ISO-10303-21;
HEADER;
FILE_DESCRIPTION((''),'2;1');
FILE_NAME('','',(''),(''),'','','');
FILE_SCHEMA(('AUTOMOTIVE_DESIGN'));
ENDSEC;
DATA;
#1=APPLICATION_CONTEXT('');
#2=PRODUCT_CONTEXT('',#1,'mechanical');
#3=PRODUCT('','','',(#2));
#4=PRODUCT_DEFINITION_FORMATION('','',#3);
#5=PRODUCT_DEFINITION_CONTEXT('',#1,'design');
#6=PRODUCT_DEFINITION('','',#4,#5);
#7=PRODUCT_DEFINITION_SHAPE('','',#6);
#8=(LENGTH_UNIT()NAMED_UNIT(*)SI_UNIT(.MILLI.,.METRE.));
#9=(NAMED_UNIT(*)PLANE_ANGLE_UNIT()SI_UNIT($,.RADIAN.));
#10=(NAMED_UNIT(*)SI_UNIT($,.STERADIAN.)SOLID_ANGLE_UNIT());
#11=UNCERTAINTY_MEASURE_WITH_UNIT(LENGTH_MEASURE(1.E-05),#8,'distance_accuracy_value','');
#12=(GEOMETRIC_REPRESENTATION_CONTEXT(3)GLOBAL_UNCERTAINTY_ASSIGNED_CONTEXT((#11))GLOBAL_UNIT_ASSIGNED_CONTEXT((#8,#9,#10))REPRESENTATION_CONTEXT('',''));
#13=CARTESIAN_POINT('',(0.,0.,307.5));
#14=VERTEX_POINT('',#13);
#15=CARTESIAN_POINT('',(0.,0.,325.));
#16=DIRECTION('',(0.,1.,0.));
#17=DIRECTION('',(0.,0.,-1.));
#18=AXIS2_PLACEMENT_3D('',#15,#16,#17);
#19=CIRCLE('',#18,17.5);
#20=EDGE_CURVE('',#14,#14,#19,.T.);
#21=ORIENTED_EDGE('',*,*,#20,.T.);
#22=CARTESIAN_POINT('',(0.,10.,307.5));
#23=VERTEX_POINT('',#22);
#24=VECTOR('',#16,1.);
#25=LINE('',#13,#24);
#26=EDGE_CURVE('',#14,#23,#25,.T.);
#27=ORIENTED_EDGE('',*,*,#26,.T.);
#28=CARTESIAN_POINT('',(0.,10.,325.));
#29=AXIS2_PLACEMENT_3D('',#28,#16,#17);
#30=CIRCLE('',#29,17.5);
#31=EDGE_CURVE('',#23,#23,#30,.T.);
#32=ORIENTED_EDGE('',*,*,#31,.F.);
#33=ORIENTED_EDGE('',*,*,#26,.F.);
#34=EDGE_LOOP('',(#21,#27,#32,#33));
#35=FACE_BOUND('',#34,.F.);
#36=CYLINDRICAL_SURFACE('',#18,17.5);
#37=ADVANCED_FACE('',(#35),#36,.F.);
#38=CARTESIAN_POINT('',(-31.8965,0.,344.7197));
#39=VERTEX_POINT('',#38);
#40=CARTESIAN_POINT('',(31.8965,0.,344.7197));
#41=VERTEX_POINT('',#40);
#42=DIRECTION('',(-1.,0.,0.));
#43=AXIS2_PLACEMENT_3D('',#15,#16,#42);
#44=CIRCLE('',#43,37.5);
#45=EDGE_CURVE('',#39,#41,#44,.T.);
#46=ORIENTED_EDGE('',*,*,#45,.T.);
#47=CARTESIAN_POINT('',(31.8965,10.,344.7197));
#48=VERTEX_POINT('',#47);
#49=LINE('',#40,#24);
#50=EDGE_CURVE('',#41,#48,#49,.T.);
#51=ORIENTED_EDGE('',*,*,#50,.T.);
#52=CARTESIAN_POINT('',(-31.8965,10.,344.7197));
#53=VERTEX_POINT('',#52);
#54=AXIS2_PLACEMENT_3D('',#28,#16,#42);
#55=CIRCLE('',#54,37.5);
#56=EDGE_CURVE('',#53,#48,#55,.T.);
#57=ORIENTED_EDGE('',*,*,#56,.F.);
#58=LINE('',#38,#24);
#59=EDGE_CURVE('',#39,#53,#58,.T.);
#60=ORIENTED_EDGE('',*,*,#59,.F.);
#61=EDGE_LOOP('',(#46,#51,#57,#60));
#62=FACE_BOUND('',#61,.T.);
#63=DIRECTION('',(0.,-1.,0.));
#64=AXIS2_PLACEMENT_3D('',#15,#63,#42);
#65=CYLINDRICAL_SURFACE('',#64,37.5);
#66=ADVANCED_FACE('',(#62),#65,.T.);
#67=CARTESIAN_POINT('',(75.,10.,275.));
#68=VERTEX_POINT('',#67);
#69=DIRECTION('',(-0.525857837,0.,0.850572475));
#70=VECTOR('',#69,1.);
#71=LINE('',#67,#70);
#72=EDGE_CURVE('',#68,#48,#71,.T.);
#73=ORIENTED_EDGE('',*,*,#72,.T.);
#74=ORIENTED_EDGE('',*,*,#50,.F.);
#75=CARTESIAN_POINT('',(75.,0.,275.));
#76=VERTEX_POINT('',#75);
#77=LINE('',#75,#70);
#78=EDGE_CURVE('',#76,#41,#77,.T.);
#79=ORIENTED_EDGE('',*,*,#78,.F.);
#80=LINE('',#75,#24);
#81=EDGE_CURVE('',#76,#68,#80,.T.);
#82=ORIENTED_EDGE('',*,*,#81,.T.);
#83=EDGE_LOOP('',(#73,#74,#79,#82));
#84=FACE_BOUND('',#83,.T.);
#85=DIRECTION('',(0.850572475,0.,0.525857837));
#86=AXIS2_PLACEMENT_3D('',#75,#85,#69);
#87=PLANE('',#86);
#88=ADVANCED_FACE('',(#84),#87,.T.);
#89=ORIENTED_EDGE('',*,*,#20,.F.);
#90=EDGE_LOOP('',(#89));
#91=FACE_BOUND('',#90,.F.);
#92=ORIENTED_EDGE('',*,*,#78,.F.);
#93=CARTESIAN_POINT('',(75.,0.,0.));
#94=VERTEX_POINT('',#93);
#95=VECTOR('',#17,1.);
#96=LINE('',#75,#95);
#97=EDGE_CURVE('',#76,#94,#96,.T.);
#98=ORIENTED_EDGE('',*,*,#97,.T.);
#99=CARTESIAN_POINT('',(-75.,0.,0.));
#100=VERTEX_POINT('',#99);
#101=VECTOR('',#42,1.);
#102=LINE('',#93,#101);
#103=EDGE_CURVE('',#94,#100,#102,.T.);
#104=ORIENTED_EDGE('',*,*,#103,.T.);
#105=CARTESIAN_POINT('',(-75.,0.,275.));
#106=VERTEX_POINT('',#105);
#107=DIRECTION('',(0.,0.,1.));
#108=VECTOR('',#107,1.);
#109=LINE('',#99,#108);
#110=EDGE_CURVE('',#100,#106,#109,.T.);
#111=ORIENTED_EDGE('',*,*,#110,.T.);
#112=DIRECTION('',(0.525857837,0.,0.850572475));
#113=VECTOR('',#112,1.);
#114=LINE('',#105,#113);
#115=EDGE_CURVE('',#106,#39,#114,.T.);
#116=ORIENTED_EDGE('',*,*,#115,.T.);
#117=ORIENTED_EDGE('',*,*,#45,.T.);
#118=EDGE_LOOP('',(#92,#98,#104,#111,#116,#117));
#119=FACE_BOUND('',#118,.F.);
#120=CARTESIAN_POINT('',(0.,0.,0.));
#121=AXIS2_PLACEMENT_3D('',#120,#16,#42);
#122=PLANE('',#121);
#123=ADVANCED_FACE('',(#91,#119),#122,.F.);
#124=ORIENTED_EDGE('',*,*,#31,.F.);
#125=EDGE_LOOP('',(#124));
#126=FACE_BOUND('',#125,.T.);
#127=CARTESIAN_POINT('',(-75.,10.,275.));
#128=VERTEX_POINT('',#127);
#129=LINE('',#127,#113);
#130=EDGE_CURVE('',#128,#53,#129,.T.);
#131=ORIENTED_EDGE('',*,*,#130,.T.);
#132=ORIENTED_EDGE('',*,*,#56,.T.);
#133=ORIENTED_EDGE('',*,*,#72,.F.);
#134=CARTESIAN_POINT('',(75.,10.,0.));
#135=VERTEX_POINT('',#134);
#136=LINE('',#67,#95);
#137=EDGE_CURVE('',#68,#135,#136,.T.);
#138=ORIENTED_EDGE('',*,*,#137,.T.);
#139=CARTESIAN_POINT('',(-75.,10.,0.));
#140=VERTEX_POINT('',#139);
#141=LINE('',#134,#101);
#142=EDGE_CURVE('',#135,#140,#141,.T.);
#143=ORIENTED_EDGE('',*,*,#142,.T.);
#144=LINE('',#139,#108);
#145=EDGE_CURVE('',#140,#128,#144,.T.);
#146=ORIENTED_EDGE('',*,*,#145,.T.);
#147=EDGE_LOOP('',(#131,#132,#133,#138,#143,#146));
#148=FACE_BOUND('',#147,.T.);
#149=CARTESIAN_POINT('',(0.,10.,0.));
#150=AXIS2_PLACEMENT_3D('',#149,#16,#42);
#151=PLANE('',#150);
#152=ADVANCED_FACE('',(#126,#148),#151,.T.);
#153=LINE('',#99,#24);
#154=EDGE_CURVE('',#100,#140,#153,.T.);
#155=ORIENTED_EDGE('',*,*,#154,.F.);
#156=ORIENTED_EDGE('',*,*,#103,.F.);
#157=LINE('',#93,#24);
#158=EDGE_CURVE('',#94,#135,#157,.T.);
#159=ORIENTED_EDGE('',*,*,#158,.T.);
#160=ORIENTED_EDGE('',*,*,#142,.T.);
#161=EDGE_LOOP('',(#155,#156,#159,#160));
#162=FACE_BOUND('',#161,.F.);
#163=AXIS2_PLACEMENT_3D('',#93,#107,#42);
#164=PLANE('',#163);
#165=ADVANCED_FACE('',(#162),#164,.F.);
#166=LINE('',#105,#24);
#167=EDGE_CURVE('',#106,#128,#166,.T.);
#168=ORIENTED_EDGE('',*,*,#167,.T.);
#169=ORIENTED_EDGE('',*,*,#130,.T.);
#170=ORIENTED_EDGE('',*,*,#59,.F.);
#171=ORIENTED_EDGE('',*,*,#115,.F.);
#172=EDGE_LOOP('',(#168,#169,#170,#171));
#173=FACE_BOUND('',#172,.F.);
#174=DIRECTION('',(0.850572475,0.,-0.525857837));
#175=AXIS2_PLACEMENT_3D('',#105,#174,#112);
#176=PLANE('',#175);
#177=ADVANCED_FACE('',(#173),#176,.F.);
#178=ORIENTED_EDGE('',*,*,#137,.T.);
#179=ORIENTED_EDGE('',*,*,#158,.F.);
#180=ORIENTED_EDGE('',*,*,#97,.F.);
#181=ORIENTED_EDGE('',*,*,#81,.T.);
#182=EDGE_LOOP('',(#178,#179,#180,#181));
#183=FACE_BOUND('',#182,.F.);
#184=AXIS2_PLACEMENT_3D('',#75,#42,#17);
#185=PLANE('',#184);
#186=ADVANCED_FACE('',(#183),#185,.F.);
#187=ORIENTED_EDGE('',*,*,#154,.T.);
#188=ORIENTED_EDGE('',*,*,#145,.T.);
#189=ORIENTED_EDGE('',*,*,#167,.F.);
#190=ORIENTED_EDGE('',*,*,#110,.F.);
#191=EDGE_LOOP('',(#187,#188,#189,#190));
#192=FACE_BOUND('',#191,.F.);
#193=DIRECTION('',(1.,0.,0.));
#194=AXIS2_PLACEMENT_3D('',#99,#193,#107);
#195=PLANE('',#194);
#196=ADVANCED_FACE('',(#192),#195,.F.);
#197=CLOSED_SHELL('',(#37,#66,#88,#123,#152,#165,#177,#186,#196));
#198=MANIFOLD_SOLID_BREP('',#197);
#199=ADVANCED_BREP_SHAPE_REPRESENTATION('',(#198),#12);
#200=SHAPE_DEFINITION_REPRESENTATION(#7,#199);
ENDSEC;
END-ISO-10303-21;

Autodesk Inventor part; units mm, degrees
ref_plane "Work Plane2" through (-75, 10, 210) normal (0, 0, 1) x (1, 0, 0)
ref_plane "YZ Plane" through (0, 0, 0) normal (1, 0, 0) x (0, 1, 0)
ref_plane "XZ Plane" through (0, 0, 0) normal (0, 1, 0) x (-1, 0, 0)
sketch "Sketch1" plane through (0, 0, 0) normal (0, 1, 0) x (-1, 0, 0)
  line L0 (-75, 0) -> (75, 0)
  line L1 (75, 0) -> (75, 275)
  line L2 (75, 275) -> (-75, 275) construction
  line L3 (-75, 275) -> (-75, 0)
  circle A0 centre (0, 325) radius 37.5
  line L4 (-75, 275) -> (-31.8965, 344.7197)
  line L5 (75, 275) -> (31.8965, 344.7197)
  point P0 (0, 0)
  point P1 (0, 0)
  dimension "d2" = 75
  dimension "d3" = 50
extrude "Extrusion1" add sketch "Sketch1" along normal blind 10
sketch "Sketch2" plane through (0, 0, 0) normal (0, -1, 0) x (1, 0, 0)
  arc A0 (31.8965, 344.7197) -> (-31.8965, 344.7197) centre (0, 325) ccw projected
  point P0 (0, 0)
hole "Hole1" at (0, 0, 325) direction (0, 1, 0) diameter 35 end through all
sketch "Sketch3" plane through (-75, 0, 0) normal (-1, 0, 0) x (0, 0, 1)
  line L0 (11, 10) -> (11, 54)
  line L1 (11, 54) -> (41, 84)
  line L2 (41, 84) -> (159, 84)
  line L3 (159, 84) -> (189, 54)
  line L4 (189, 54) -> (189, 10)
  line L5 (0, 10) -> (275, 10) projected
  line L6 (189, 10) -> (11, 10)
  dimension "d14" = 135
  dimension "d18" = 11
  dimension "d19" = 74
  dimension "d20" = 30
  dimension "d22" = 178
  dimension "d26" = 21
sketch "Sketch6" plane through (-75, 10, 210) normal (0, 0, 1) x (1, 0, 0)
  line L0 (0, 0) -> (10, 0)
  line L1 (10, 0) -> (10, 25)
  line L2 (10, 25) -> (0, 25)
  line L3 (0, 25) -> (0, 0)
  point P0 (75, -10)
  dimension "d27" = 10
  dimension "d28" = 25
sketch3d "3D Sketch1"
sketch "Sketch7" plane through (0, 10, 0) normal (0, 1, 0) x (1, 0, 0)
  circle A0 centre (0, -325) radius 17.5 projected
  circle A1 centre (0, -325) radius 27.5
  point P0 (0, 0)
  dimension "d31" = 10
sketch "Sketch8" plane through (-75, 35, 210) normal (0, 1, 0) x (1, 0, 0)
  line L0 (0, -65) -> (43.1035, -134.7197) projected
  arc A0 (43.1035, -134.7197) -> (106.8965, -134.7197) centre (75, -115) ccw projected
  line L1 (106.8965, -134.7197) -> (150, -65) projected
  line L2 (150, -65) -> (150, 0) projected
  line L3 (140, 0) -> (150, 0) projected
  line L4 (140, -62.1584) -> (140, 0) projected
  line L5 (98.3907, -129.4611) -> (140, -62.1584) projected
  arc A1 (51.6093, -129.4611) -> (98.3907, -129.4611) centre (75, -115) ccw projected
  line L6 (10, -62.1584) -> (51.6093, -129.4611) projected
  line L7 (10, 0) -> (10, -62.1584) projected
  line L8 (10, 0) -> (0, 0) projected
  line L9 (0, 0) -> (0, -65) projected
  line L10 (140, 0) -> (10, 0)
  circle A2 centre (75, -115) radius 17.5 projected
  point P0 (75, 210)
properties part number "Skid Lifting Plate" material "Steel, Galvanized"
